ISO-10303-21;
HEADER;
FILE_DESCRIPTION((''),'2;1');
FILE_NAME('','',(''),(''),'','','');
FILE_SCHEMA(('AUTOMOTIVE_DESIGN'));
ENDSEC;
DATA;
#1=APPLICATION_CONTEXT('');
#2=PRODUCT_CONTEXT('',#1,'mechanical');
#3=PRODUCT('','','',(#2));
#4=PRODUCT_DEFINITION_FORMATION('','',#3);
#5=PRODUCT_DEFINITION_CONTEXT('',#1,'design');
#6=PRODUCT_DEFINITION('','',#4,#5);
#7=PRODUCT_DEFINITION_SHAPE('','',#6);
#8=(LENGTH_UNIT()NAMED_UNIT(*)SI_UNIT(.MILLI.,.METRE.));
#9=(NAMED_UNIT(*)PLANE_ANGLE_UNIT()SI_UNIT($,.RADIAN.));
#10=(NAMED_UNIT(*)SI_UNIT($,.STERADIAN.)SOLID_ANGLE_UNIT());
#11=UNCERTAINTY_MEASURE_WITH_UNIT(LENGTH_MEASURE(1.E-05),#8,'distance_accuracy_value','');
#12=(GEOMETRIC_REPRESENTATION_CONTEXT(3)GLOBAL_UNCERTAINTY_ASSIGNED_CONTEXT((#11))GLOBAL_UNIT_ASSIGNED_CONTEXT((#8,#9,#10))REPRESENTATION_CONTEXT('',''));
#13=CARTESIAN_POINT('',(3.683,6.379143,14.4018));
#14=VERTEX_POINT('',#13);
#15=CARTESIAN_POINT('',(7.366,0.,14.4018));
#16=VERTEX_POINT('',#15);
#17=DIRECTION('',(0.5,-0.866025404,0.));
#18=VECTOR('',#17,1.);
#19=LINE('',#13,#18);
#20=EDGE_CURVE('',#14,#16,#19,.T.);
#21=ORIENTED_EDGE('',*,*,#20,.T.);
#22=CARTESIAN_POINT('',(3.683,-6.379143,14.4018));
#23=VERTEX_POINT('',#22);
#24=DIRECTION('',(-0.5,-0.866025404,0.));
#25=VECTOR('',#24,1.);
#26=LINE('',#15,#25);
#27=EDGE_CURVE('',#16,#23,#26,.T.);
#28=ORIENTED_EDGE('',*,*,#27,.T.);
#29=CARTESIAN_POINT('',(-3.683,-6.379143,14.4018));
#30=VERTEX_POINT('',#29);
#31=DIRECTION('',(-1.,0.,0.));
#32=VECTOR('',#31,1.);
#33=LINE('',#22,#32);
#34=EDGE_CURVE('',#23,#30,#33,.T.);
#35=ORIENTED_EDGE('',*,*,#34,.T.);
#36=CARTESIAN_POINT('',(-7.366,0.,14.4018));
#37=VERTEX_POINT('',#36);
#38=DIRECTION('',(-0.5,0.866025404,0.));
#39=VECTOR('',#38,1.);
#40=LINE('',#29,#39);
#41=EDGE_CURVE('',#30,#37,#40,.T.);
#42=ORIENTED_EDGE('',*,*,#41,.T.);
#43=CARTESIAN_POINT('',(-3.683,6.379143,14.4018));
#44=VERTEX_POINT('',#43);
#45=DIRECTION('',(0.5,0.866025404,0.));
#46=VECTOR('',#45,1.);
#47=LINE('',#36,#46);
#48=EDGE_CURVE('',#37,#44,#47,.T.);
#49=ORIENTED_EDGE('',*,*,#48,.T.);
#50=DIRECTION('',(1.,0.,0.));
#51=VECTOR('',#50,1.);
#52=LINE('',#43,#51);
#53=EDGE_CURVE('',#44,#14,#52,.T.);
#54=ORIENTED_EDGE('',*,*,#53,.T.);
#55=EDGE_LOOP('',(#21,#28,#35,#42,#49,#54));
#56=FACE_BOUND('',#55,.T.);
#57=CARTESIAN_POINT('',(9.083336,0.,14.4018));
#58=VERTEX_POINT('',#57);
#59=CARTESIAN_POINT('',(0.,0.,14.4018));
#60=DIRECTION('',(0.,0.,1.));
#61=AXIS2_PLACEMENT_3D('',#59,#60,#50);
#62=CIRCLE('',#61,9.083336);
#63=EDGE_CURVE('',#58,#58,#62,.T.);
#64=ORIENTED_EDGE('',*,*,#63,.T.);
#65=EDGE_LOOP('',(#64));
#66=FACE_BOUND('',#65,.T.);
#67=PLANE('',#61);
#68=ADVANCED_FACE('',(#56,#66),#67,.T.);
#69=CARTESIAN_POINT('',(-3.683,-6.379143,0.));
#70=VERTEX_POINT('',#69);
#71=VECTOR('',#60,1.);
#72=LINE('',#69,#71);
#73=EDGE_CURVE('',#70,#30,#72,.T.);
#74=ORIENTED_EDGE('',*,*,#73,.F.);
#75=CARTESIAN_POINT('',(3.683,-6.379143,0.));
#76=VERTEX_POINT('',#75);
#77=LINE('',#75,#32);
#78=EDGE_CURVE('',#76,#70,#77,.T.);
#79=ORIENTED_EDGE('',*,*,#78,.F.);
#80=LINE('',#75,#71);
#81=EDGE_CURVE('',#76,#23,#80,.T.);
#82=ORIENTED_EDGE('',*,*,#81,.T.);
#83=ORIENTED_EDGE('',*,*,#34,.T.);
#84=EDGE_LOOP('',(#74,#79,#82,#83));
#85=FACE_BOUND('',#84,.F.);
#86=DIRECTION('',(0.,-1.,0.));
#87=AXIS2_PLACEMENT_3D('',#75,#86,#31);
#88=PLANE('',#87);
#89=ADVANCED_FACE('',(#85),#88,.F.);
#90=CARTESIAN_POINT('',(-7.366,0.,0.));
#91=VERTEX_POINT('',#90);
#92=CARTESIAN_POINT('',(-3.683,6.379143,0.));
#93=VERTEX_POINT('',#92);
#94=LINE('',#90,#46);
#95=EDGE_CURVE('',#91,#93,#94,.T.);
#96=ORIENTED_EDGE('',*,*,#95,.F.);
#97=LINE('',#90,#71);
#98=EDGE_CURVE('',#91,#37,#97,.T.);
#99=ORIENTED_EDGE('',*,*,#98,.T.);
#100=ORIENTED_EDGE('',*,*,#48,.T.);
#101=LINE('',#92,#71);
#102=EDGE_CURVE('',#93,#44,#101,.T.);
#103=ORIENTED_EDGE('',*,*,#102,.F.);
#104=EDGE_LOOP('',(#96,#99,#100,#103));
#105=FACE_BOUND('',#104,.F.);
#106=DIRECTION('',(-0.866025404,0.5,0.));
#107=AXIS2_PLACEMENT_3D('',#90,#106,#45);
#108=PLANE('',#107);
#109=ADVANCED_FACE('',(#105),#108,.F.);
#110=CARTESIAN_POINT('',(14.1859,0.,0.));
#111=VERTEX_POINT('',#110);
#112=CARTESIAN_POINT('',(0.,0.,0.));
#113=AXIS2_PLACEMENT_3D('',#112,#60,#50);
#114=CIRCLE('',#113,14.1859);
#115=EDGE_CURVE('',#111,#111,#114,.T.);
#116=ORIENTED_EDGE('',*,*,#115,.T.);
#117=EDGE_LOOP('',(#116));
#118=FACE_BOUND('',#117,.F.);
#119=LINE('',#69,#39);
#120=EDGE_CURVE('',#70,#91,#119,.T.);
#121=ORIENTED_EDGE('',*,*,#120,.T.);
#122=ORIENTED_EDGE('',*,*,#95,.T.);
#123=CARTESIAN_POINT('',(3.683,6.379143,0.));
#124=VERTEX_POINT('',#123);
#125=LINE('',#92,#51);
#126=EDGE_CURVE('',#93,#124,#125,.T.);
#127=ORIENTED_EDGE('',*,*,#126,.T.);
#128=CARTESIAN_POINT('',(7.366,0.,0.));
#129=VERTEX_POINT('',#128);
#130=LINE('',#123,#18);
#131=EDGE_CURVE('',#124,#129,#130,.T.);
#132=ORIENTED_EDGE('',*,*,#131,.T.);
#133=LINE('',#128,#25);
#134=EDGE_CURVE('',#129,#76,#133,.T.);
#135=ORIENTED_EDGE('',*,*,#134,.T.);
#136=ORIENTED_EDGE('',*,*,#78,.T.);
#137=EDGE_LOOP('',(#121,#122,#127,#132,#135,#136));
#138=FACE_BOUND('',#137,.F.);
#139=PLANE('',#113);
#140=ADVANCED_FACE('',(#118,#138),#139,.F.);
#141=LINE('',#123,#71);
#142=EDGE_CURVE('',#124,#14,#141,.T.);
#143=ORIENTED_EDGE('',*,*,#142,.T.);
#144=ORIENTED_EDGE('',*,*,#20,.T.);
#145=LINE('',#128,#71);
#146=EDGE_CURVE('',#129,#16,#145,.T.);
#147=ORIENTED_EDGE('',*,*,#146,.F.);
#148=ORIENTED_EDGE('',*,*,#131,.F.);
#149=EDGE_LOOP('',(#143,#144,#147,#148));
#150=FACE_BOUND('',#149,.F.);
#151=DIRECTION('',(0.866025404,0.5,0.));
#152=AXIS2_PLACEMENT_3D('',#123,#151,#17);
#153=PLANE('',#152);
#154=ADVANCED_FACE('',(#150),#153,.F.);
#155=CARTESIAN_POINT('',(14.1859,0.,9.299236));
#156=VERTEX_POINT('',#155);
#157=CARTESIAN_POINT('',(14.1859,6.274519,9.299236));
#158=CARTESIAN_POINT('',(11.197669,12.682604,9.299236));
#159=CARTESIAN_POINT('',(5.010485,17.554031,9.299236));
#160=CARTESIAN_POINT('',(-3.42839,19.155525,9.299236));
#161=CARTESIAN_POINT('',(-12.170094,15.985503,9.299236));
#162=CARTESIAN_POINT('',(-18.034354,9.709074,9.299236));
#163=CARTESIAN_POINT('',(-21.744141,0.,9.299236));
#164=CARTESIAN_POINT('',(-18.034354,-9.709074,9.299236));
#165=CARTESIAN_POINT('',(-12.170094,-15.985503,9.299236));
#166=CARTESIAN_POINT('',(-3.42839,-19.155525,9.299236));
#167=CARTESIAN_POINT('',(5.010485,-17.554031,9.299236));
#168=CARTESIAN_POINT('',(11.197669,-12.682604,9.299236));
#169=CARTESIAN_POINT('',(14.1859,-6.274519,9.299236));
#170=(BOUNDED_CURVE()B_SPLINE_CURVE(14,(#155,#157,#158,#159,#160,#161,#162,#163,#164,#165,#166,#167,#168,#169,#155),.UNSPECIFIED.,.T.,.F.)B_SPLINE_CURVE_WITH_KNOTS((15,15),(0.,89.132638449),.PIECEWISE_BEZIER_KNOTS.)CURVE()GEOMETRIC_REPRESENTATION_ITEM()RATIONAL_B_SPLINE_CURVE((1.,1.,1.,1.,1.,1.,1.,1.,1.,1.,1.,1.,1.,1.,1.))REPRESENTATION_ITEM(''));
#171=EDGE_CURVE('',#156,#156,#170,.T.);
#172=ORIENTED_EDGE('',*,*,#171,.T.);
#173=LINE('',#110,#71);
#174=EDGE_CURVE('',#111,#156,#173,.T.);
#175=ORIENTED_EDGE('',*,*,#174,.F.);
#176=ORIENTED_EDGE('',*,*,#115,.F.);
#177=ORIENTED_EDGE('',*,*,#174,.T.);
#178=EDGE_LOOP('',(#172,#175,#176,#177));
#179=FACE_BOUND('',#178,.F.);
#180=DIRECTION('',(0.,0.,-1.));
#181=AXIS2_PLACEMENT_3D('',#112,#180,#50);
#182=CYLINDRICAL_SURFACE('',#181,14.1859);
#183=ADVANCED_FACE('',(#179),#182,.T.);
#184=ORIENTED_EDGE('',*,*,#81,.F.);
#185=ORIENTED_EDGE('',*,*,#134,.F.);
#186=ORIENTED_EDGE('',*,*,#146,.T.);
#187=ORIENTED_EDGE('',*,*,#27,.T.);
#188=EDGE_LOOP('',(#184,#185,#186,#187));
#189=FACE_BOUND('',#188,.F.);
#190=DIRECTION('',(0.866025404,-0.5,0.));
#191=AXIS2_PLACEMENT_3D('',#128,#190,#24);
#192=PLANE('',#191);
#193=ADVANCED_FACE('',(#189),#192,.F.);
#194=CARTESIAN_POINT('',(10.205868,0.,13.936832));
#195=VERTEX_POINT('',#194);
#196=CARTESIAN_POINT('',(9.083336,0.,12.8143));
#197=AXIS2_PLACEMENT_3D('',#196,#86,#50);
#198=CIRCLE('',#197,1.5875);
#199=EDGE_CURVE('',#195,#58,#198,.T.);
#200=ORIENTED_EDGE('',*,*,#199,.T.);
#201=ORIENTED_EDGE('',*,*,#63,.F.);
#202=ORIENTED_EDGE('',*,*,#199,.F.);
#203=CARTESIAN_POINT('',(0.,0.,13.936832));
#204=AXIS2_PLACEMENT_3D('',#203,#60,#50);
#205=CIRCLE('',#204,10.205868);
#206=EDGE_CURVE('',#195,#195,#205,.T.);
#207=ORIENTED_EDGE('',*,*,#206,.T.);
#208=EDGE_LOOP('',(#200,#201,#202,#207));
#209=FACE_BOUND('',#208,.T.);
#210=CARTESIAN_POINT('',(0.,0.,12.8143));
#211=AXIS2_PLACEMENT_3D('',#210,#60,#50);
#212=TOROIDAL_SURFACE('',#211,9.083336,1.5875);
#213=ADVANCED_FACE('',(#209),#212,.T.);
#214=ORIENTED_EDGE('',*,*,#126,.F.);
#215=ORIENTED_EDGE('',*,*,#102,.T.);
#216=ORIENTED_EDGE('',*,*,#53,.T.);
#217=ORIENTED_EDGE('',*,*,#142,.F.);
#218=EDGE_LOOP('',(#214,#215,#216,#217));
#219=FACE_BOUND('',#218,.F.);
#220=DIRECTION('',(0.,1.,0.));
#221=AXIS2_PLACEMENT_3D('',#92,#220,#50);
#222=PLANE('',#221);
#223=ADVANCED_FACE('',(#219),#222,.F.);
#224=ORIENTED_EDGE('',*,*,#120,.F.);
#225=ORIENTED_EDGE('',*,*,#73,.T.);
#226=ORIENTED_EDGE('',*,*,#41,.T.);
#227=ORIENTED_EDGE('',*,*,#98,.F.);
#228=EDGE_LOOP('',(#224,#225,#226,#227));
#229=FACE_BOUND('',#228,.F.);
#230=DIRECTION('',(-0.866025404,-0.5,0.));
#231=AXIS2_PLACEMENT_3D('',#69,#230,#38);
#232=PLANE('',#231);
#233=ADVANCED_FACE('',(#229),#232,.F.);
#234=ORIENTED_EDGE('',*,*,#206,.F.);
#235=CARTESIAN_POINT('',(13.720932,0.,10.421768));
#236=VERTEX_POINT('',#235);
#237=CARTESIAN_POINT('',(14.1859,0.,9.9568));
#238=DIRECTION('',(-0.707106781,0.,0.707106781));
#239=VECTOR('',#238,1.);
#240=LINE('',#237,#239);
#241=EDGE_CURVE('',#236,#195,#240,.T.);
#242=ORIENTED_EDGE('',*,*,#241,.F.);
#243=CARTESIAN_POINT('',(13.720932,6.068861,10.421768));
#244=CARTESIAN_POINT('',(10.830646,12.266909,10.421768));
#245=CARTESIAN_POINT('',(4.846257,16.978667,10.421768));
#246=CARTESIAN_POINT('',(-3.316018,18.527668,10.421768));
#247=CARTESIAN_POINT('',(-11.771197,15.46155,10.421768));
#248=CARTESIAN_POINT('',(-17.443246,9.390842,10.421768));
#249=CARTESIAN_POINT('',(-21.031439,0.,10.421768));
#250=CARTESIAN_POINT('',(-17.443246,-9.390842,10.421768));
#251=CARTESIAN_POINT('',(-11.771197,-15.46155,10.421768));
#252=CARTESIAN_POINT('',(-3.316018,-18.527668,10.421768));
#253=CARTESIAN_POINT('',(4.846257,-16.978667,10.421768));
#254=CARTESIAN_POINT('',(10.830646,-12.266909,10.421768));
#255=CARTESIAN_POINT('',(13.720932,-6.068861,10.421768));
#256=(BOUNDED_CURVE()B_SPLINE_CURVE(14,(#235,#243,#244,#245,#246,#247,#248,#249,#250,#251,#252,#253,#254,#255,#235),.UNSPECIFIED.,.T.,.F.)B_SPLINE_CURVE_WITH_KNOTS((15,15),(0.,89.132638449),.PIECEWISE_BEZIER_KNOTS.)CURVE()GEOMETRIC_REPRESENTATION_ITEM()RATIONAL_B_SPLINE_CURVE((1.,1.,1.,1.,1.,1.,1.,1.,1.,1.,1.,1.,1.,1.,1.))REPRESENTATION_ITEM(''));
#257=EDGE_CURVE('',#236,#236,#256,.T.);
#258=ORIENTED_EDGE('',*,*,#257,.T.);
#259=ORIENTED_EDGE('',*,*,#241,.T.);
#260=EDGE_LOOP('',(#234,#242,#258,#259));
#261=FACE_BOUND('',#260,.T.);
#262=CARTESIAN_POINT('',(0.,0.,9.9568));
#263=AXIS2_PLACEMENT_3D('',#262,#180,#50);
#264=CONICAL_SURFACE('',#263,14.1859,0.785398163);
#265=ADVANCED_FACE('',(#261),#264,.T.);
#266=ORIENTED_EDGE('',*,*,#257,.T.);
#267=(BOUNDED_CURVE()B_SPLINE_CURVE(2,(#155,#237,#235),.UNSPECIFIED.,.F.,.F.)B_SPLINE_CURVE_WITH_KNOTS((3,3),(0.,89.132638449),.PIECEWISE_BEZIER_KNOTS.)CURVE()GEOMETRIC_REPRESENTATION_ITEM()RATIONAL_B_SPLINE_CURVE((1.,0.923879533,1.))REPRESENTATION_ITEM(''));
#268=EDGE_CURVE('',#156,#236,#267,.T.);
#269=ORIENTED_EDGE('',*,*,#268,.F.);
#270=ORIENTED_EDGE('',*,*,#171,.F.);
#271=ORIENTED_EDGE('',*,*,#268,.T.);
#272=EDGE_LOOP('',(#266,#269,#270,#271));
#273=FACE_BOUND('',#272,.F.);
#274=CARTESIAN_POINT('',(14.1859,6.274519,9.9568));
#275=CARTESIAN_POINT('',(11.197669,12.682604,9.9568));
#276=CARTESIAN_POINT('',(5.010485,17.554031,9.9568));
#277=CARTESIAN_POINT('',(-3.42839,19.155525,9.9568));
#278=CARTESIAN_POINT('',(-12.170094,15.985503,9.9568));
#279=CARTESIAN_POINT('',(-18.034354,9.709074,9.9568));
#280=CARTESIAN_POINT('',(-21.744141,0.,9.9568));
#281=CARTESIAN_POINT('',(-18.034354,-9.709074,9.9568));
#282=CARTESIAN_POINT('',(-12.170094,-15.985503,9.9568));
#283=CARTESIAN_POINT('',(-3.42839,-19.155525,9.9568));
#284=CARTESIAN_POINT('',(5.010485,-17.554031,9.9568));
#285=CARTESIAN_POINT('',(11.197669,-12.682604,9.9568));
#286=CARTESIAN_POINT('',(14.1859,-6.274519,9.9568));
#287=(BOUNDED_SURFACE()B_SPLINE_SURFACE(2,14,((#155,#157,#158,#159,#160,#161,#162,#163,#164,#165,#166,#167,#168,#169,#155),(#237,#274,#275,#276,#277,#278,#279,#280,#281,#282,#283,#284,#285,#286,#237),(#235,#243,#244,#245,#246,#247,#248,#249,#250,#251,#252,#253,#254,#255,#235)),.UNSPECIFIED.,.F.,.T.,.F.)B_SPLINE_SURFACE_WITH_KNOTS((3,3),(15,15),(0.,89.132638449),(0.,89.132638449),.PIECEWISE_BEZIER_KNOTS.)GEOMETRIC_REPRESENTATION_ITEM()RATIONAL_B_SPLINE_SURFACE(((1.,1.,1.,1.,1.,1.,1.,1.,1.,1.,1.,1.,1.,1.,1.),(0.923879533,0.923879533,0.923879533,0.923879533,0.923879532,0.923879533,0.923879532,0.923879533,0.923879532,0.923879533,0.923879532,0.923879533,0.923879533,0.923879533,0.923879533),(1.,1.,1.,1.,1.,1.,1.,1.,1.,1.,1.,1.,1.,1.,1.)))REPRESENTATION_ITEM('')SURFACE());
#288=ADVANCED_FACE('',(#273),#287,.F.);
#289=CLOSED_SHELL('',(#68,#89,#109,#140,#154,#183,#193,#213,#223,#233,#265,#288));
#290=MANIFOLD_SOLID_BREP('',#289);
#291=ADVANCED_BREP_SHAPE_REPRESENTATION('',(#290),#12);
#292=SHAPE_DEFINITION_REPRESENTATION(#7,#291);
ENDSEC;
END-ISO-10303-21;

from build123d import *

# Parameters (mm, degrees)
F0_R     = 14.1859
F1_DEPTH = 14.4018
F2_SIZE  = 4.445
F3_R     = 1.5875


# Not quite as in the source:
# - a feature names something its author has since deleted; it is built from what else it names


with BuildPart() as f1:
    # F0 (on Top) → F1 (new body)
    with BuildSketch(Plane.XY):
        Circle(F0_R)
        Polygon((-7.366, 0), (-3.683, 6.3791431243), (3.683, 6.3791431243), (7.366, 0), (3.683, -6.3791431243), (-3.683, -6.3791431243), align=None, mode=Mode.SUBTRACT)
    extrude(amount=F1_DEPTH)

    # F2
    f2_edges = [f1.edges().sort_by_distance(p)[0] for p in [
        (-14.1859, 0, 14.4018),
    ]]
    chamfer(f2_edges, length=F2_SIZE)

    # F3
    f3_edges = [f1.edges().sort_by_distance(p)[0] for p in [
        (-9.7409, 0, 14.4018),
        (-14.1859, 0, 9.9568),
    ]]
    fillet(f3_edges, radius=F3_R)


solid = f1.part
